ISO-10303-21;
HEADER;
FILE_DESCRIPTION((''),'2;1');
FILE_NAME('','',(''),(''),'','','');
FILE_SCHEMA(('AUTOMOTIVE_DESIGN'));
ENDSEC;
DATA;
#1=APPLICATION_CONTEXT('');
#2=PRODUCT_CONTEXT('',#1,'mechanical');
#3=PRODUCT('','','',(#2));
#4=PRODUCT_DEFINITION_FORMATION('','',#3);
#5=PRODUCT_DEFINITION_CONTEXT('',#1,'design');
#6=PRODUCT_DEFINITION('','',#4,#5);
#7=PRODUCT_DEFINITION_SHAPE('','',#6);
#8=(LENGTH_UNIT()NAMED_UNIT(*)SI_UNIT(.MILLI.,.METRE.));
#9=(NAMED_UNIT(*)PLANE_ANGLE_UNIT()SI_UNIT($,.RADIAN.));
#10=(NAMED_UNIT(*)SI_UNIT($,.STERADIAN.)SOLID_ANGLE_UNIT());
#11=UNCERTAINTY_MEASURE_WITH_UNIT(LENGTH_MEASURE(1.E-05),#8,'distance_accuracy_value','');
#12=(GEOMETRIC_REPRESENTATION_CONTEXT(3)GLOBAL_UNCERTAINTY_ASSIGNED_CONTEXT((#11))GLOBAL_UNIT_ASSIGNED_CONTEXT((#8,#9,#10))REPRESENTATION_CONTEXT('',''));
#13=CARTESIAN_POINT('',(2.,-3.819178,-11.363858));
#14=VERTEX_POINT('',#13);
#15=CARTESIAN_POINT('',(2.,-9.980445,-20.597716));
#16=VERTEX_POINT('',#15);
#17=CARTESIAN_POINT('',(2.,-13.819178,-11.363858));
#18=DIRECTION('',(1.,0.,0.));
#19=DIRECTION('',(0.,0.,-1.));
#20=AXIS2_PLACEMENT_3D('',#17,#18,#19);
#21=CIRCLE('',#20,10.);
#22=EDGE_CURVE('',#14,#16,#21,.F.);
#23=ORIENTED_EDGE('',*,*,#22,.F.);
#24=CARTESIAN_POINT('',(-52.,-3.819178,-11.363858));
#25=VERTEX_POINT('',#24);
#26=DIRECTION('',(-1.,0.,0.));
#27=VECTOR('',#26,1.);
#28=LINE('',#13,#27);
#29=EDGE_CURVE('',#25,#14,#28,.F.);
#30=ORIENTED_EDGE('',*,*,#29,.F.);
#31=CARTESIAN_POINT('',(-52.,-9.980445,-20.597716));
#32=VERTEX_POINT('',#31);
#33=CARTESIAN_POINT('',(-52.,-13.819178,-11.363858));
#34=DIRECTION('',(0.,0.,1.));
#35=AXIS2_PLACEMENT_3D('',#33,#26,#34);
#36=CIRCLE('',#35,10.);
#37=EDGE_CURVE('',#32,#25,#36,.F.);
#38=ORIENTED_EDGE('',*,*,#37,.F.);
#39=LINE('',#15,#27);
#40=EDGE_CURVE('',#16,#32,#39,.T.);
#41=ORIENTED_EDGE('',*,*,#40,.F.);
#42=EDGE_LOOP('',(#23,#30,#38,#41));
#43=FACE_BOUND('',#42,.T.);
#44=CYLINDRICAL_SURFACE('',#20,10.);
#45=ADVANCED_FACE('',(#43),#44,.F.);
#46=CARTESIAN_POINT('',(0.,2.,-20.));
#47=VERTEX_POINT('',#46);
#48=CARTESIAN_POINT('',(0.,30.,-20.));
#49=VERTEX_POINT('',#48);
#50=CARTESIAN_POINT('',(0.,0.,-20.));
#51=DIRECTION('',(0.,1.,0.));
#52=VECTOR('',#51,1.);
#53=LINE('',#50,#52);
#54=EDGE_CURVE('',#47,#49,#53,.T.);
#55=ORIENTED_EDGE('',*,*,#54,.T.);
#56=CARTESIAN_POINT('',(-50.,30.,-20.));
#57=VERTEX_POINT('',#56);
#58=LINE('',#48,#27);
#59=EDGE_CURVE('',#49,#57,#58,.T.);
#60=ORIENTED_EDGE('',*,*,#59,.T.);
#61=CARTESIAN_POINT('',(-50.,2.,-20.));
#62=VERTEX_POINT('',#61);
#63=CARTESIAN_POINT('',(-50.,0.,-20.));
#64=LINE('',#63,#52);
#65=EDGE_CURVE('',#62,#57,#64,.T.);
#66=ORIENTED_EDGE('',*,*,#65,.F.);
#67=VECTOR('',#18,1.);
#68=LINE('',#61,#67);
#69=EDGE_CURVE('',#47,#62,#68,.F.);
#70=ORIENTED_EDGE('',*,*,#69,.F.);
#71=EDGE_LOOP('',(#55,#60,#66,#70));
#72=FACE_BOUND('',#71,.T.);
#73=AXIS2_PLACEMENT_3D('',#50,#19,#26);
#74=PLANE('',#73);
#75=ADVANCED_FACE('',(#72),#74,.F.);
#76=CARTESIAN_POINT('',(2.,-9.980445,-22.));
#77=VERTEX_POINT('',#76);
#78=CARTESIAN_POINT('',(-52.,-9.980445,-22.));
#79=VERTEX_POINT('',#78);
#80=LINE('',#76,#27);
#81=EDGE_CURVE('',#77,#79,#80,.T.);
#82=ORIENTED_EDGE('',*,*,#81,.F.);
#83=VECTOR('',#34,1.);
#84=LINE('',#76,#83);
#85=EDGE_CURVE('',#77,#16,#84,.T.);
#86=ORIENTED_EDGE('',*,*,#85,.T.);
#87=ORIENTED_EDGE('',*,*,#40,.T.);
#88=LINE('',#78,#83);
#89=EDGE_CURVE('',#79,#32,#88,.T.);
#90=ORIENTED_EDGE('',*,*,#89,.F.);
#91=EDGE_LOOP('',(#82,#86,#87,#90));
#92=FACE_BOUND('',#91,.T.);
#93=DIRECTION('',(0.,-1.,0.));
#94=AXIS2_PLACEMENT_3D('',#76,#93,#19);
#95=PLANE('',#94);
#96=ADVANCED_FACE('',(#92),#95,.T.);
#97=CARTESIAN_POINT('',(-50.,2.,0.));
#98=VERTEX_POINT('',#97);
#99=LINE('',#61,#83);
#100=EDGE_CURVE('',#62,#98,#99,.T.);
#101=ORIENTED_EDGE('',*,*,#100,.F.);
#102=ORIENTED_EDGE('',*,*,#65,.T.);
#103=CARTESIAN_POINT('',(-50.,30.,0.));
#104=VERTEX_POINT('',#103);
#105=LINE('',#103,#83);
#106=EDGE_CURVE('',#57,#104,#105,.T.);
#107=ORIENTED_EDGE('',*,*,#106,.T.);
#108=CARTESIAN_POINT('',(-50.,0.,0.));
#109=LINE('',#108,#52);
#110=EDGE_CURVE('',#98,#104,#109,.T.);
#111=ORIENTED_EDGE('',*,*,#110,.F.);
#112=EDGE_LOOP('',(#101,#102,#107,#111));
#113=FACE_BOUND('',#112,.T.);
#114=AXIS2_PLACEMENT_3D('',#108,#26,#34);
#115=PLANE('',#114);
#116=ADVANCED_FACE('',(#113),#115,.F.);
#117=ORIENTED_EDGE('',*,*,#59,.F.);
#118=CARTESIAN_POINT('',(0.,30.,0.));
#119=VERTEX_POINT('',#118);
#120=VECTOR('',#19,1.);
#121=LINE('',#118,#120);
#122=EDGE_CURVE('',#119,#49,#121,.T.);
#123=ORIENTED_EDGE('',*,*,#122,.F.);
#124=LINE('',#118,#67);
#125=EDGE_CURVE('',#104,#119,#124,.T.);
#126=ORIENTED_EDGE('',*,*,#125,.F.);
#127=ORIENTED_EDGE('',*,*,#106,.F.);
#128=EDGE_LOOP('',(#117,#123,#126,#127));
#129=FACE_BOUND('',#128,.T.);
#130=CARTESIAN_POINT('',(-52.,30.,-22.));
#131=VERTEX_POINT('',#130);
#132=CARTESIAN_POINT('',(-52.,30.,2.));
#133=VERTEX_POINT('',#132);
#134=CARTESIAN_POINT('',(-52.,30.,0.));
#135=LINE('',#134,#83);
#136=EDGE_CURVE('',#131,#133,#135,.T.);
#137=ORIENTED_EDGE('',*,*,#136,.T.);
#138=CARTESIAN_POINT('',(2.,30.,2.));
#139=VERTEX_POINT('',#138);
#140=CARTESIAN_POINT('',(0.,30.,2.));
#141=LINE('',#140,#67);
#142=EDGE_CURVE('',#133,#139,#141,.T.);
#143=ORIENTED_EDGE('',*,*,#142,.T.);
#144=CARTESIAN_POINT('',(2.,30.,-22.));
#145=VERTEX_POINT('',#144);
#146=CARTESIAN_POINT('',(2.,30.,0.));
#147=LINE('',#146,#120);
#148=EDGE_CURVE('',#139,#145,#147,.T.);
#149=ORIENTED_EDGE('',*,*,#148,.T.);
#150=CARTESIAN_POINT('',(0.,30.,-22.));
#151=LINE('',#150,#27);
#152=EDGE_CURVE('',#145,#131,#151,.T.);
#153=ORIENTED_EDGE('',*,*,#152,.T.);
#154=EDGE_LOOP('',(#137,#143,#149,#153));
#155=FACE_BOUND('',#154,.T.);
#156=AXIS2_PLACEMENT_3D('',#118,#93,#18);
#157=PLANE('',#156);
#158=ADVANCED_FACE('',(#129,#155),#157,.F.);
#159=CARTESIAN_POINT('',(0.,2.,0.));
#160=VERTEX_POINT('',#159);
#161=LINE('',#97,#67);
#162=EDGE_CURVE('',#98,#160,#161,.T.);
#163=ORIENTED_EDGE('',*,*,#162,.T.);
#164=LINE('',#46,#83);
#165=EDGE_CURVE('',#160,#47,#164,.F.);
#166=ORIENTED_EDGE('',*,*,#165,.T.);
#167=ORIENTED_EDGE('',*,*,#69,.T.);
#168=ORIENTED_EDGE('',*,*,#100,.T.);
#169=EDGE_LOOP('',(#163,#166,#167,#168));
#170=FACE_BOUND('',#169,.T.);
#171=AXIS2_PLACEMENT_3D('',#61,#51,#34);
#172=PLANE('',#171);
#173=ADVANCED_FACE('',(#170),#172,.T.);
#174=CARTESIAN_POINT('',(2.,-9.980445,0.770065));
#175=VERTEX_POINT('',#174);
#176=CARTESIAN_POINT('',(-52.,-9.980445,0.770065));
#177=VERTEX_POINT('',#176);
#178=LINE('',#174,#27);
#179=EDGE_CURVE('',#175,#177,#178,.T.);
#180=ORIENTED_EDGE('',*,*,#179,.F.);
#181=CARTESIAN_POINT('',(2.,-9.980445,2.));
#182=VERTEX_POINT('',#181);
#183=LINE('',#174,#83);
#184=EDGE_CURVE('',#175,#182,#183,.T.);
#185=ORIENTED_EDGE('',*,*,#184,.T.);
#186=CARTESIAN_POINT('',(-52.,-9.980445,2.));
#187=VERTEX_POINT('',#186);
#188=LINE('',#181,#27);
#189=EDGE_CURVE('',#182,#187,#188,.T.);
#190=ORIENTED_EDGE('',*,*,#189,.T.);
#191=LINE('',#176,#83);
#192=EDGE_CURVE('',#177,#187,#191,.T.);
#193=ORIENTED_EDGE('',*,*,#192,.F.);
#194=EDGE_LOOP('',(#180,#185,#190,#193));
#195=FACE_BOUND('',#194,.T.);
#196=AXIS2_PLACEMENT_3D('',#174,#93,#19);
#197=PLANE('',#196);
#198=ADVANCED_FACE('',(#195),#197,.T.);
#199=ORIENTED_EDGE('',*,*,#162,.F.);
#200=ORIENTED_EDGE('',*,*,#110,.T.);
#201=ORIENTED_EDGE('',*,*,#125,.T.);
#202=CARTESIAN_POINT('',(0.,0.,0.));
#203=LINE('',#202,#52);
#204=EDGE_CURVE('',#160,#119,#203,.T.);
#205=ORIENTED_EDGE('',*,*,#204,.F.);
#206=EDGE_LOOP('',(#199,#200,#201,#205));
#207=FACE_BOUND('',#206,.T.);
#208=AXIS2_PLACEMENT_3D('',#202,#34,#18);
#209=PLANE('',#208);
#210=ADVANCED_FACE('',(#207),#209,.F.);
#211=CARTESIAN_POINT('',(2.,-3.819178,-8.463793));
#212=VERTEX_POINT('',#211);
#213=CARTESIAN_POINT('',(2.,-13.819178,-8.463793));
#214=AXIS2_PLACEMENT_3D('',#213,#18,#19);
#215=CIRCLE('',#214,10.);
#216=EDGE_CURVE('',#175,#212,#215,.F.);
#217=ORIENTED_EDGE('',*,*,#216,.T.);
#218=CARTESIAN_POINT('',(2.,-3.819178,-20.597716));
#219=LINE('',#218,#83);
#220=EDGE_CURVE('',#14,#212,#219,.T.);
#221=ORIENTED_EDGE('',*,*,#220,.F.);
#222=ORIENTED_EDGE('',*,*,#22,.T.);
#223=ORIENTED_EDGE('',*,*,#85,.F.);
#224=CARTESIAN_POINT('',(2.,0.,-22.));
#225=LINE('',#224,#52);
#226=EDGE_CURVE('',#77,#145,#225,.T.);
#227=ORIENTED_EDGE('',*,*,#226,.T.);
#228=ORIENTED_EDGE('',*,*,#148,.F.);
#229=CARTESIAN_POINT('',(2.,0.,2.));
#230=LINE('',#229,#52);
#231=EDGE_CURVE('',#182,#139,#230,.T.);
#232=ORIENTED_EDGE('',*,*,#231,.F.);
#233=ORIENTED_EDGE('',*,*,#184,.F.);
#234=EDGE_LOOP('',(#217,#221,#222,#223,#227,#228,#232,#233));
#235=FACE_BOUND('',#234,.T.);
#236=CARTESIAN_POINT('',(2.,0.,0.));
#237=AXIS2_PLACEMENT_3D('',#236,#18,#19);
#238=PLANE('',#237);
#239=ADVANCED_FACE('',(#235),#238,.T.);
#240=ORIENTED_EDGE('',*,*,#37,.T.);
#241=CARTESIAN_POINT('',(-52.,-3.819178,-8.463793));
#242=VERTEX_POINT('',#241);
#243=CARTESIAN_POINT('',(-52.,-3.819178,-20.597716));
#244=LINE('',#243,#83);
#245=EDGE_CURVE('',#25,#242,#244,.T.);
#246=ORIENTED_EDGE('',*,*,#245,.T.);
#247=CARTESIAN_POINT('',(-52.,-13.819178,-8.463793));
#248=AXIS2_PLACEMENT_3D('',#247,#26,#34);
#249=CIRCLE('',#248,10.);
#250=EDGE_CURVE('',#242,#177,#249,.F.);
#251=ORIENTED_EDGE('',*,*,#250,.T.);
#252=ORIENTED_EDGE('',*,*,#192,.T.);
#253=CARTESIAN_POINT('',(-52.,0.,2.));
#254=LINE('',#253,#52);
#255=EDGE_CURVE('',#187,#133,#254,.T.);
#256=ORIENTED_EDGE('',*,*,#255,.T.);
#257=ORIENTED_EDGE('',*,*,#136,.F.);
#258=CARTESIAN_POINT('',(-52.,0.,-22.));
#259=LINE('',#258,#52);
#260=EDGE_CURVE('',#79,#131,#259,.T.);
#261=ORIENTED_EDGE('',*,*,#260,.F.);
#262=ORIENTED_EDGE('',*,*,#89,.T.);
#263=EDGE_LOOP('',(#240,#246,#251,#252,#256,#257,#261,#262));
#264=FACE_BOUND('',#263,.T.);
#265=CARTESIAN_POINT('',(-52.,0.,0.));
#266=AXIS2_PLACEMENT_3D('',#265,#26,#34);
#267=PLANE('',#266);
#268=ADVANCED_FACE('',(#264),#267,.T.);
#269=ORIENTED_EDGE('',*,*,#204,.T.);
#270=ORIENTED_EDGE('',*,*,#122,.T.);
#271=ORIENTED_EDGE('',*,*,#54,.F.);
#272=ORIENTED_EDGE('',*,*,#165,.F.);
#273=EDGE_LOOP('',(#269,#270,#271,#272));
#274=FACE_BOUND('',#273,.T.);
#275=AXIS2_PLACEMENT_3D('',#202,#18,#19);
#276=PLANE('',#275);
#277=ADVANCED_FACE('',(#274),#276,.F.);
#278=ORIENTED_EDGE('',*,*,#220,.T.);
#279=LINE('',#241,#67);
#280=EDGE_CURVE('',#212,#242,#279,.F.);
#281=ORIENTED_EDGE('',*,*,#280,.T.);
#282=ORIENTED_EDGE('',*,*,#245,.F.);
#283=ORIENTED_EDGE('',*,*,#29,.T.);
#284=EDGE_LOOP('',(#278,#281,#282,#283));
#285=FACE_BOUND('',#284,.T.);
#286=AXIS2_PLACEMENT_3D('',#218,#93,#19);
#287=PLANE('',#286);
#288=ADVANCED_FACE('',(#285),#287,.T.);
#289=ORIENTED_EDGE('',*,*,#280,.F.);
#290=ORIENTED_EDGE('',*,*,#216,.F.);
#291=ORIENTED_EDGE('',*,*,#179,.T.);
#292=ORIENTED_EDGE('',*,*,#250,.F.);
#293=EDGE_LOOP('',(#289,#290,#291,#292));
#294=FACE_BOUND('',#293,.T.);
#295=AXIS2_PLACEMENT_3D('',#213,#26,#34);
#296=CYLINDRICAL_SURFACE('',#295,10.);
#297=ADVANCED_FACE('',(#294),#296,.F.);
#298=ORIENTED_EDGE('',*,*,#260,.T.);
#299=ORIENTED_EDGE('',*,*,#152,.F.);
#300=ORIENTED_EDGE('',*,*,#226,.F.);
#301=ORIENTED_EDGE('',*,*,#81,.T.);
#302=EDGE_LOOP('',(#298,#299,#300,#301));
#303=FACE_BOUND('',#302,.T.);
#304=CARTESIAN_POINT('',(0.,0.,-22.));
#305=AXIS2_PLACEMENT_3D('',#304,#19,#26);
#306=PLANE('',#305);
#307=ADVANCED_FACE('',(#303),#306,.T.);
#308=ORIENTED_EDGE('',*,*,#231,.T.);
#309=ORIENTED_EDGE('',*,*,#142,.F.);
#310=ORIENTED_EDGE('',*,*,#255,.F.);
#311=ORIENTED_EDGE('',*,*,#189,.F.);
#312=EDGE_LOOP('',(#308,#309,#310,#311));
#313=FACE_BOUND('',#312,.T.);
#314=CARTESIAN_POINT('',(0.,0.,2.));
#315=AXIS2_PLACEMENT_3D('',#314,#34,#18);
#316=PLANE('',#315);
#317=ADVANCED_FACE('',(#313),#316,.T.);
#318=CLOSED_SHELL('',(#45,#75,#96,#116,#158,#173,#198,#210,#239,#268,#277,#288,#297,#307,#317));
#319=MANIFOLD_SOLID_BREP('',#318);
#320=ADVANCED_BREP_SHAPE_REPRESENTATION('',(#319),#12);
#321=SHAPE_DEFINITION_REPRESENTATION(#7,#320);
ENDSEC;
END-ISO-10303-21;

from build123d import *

# Parameters (mm, degrees)
SURFACE_EXTRUSION1_1_DEPTH = 30
EPAISSIR1_T1               = 2
EPAISSIR2_OUTLINE_W        = 50
EPAISSIR2_OUTLINE_H        = 20
EPAISSIR2_DEPTH            = 2
BOSS_EXTRU_1_DEPTH         = 54
CONG_1_R                   = 10


# Read off the part's stored shape, not the designer's step: Epaissir2
with BuildPart() as body_1:
    # Surface-Extrusion1: a surface, the sketch's curves swept straight by 30 mm
    with BuildLine(Plane(origin=(0, 0, 0), x_dir=(1, 0, 0), z_dir=(0, 1, 0)), mode=Mode.PRIVATE) as surface_extrusion1_1_path:
        Line((0, 0), (-50, 0))
        Line((-50, 0), (-50, 20))
        Line((-50, 20), (0, 20))
        Line((0, 20), (0, 0))
    surface_extrusion1_1 = Shell.extrude(surface_extrusion1_1_path.wire(), (0 * SURFACE_EXTRUSION1_1_DEPTH, 1 * SURFACE_EXTRUSION1_1_DEPTH, 0 * SURFACE_EXTRUSION1_1_DEPTH))
    add(Solid.thicken(surface_extrusion1_1, EPAISSIR1_T1))

    # Epaissir2 outline → Epaissir2 (add)
    with BuildSketch(Plane(origin=(0, 0, 0), x_dir=(1, 0, 0), z_dir=(0, 1, 0))):
        with Locations((-25, 10)):
            Rectangle(EPAISSIR2_OUTLINE_W, EPAISSIR2_OUTLINE_H)
    extrude(amount=EPAISSIR2_DEPTH)

    # Esquisse3 → Boss.-Extru.1 (add)
    with BuildSketch(Plane.ZY.offset(52)):
        Polygon((-22, 0), (-22, -9.980445305), (-20.597715591, -9.980445305), (-20.597715591, -3.819178115), (0.770065176, -3.819178115), (0.770065176, -9.980445305), (2, -9.980445305), (2, 0), align=None)
    extrude(amount=-BOSS_EXTRU_1_DEPTH)

    # Congé1
    # the kernel refuses this fillet: 10 mm, written as the material it adds along each edge
    with BuildSketch(Plane(origin=(-52, -3.819178115, 0.770065176), x_dir=(0, -1, 0), z_dir=(1, 0, 0))) as cong_1_piece_1:
        with BuildLine():
            CenterArc((10, 9.233857829), CONG_1_R, 180, 67.426190035)
            Line((0, 9.233857829), (-0.2, 9.233857829))
            Line((-0.2, 9.233857829), (-0.2, 0))
            Line((-0.2, 0), (0, -0.2))
            ThreePointArc((0, -0.2), (3.080633595, -0.2), (6.084492534, -0.184677157))
            Line((6.084492534, -0.184677157), (6.16126719, 0))
        make_face()
    extrude(amount=54)
    with BuildSketch(Plane(origin=(-52, -3.819178115, -20.597715591), x_dir=(0, 0, 1), z_dir=(1, 0, 0))) as cong_1_piece_2:
        with BuildLine():
            CenterArc((9.233857829, 10), CONG_1_R, 202.573809965, 67.426190035)
            Line((0, 6.16126719), (-0.184677157, 6.084492534))
            ThreePointArc((-0.184677157, 6.084492534), (-0.2, 3.080633595), (-0.2, 0))
            Line((-0.2, 0), (0, -0.2))
            Line((0, -0.2), (9.233857829, -0.2))
            Line((9.233857829, -0.2), (9.233857829, 0))
        make_face()
    extrude(amount=54)


solid = body_1.part
